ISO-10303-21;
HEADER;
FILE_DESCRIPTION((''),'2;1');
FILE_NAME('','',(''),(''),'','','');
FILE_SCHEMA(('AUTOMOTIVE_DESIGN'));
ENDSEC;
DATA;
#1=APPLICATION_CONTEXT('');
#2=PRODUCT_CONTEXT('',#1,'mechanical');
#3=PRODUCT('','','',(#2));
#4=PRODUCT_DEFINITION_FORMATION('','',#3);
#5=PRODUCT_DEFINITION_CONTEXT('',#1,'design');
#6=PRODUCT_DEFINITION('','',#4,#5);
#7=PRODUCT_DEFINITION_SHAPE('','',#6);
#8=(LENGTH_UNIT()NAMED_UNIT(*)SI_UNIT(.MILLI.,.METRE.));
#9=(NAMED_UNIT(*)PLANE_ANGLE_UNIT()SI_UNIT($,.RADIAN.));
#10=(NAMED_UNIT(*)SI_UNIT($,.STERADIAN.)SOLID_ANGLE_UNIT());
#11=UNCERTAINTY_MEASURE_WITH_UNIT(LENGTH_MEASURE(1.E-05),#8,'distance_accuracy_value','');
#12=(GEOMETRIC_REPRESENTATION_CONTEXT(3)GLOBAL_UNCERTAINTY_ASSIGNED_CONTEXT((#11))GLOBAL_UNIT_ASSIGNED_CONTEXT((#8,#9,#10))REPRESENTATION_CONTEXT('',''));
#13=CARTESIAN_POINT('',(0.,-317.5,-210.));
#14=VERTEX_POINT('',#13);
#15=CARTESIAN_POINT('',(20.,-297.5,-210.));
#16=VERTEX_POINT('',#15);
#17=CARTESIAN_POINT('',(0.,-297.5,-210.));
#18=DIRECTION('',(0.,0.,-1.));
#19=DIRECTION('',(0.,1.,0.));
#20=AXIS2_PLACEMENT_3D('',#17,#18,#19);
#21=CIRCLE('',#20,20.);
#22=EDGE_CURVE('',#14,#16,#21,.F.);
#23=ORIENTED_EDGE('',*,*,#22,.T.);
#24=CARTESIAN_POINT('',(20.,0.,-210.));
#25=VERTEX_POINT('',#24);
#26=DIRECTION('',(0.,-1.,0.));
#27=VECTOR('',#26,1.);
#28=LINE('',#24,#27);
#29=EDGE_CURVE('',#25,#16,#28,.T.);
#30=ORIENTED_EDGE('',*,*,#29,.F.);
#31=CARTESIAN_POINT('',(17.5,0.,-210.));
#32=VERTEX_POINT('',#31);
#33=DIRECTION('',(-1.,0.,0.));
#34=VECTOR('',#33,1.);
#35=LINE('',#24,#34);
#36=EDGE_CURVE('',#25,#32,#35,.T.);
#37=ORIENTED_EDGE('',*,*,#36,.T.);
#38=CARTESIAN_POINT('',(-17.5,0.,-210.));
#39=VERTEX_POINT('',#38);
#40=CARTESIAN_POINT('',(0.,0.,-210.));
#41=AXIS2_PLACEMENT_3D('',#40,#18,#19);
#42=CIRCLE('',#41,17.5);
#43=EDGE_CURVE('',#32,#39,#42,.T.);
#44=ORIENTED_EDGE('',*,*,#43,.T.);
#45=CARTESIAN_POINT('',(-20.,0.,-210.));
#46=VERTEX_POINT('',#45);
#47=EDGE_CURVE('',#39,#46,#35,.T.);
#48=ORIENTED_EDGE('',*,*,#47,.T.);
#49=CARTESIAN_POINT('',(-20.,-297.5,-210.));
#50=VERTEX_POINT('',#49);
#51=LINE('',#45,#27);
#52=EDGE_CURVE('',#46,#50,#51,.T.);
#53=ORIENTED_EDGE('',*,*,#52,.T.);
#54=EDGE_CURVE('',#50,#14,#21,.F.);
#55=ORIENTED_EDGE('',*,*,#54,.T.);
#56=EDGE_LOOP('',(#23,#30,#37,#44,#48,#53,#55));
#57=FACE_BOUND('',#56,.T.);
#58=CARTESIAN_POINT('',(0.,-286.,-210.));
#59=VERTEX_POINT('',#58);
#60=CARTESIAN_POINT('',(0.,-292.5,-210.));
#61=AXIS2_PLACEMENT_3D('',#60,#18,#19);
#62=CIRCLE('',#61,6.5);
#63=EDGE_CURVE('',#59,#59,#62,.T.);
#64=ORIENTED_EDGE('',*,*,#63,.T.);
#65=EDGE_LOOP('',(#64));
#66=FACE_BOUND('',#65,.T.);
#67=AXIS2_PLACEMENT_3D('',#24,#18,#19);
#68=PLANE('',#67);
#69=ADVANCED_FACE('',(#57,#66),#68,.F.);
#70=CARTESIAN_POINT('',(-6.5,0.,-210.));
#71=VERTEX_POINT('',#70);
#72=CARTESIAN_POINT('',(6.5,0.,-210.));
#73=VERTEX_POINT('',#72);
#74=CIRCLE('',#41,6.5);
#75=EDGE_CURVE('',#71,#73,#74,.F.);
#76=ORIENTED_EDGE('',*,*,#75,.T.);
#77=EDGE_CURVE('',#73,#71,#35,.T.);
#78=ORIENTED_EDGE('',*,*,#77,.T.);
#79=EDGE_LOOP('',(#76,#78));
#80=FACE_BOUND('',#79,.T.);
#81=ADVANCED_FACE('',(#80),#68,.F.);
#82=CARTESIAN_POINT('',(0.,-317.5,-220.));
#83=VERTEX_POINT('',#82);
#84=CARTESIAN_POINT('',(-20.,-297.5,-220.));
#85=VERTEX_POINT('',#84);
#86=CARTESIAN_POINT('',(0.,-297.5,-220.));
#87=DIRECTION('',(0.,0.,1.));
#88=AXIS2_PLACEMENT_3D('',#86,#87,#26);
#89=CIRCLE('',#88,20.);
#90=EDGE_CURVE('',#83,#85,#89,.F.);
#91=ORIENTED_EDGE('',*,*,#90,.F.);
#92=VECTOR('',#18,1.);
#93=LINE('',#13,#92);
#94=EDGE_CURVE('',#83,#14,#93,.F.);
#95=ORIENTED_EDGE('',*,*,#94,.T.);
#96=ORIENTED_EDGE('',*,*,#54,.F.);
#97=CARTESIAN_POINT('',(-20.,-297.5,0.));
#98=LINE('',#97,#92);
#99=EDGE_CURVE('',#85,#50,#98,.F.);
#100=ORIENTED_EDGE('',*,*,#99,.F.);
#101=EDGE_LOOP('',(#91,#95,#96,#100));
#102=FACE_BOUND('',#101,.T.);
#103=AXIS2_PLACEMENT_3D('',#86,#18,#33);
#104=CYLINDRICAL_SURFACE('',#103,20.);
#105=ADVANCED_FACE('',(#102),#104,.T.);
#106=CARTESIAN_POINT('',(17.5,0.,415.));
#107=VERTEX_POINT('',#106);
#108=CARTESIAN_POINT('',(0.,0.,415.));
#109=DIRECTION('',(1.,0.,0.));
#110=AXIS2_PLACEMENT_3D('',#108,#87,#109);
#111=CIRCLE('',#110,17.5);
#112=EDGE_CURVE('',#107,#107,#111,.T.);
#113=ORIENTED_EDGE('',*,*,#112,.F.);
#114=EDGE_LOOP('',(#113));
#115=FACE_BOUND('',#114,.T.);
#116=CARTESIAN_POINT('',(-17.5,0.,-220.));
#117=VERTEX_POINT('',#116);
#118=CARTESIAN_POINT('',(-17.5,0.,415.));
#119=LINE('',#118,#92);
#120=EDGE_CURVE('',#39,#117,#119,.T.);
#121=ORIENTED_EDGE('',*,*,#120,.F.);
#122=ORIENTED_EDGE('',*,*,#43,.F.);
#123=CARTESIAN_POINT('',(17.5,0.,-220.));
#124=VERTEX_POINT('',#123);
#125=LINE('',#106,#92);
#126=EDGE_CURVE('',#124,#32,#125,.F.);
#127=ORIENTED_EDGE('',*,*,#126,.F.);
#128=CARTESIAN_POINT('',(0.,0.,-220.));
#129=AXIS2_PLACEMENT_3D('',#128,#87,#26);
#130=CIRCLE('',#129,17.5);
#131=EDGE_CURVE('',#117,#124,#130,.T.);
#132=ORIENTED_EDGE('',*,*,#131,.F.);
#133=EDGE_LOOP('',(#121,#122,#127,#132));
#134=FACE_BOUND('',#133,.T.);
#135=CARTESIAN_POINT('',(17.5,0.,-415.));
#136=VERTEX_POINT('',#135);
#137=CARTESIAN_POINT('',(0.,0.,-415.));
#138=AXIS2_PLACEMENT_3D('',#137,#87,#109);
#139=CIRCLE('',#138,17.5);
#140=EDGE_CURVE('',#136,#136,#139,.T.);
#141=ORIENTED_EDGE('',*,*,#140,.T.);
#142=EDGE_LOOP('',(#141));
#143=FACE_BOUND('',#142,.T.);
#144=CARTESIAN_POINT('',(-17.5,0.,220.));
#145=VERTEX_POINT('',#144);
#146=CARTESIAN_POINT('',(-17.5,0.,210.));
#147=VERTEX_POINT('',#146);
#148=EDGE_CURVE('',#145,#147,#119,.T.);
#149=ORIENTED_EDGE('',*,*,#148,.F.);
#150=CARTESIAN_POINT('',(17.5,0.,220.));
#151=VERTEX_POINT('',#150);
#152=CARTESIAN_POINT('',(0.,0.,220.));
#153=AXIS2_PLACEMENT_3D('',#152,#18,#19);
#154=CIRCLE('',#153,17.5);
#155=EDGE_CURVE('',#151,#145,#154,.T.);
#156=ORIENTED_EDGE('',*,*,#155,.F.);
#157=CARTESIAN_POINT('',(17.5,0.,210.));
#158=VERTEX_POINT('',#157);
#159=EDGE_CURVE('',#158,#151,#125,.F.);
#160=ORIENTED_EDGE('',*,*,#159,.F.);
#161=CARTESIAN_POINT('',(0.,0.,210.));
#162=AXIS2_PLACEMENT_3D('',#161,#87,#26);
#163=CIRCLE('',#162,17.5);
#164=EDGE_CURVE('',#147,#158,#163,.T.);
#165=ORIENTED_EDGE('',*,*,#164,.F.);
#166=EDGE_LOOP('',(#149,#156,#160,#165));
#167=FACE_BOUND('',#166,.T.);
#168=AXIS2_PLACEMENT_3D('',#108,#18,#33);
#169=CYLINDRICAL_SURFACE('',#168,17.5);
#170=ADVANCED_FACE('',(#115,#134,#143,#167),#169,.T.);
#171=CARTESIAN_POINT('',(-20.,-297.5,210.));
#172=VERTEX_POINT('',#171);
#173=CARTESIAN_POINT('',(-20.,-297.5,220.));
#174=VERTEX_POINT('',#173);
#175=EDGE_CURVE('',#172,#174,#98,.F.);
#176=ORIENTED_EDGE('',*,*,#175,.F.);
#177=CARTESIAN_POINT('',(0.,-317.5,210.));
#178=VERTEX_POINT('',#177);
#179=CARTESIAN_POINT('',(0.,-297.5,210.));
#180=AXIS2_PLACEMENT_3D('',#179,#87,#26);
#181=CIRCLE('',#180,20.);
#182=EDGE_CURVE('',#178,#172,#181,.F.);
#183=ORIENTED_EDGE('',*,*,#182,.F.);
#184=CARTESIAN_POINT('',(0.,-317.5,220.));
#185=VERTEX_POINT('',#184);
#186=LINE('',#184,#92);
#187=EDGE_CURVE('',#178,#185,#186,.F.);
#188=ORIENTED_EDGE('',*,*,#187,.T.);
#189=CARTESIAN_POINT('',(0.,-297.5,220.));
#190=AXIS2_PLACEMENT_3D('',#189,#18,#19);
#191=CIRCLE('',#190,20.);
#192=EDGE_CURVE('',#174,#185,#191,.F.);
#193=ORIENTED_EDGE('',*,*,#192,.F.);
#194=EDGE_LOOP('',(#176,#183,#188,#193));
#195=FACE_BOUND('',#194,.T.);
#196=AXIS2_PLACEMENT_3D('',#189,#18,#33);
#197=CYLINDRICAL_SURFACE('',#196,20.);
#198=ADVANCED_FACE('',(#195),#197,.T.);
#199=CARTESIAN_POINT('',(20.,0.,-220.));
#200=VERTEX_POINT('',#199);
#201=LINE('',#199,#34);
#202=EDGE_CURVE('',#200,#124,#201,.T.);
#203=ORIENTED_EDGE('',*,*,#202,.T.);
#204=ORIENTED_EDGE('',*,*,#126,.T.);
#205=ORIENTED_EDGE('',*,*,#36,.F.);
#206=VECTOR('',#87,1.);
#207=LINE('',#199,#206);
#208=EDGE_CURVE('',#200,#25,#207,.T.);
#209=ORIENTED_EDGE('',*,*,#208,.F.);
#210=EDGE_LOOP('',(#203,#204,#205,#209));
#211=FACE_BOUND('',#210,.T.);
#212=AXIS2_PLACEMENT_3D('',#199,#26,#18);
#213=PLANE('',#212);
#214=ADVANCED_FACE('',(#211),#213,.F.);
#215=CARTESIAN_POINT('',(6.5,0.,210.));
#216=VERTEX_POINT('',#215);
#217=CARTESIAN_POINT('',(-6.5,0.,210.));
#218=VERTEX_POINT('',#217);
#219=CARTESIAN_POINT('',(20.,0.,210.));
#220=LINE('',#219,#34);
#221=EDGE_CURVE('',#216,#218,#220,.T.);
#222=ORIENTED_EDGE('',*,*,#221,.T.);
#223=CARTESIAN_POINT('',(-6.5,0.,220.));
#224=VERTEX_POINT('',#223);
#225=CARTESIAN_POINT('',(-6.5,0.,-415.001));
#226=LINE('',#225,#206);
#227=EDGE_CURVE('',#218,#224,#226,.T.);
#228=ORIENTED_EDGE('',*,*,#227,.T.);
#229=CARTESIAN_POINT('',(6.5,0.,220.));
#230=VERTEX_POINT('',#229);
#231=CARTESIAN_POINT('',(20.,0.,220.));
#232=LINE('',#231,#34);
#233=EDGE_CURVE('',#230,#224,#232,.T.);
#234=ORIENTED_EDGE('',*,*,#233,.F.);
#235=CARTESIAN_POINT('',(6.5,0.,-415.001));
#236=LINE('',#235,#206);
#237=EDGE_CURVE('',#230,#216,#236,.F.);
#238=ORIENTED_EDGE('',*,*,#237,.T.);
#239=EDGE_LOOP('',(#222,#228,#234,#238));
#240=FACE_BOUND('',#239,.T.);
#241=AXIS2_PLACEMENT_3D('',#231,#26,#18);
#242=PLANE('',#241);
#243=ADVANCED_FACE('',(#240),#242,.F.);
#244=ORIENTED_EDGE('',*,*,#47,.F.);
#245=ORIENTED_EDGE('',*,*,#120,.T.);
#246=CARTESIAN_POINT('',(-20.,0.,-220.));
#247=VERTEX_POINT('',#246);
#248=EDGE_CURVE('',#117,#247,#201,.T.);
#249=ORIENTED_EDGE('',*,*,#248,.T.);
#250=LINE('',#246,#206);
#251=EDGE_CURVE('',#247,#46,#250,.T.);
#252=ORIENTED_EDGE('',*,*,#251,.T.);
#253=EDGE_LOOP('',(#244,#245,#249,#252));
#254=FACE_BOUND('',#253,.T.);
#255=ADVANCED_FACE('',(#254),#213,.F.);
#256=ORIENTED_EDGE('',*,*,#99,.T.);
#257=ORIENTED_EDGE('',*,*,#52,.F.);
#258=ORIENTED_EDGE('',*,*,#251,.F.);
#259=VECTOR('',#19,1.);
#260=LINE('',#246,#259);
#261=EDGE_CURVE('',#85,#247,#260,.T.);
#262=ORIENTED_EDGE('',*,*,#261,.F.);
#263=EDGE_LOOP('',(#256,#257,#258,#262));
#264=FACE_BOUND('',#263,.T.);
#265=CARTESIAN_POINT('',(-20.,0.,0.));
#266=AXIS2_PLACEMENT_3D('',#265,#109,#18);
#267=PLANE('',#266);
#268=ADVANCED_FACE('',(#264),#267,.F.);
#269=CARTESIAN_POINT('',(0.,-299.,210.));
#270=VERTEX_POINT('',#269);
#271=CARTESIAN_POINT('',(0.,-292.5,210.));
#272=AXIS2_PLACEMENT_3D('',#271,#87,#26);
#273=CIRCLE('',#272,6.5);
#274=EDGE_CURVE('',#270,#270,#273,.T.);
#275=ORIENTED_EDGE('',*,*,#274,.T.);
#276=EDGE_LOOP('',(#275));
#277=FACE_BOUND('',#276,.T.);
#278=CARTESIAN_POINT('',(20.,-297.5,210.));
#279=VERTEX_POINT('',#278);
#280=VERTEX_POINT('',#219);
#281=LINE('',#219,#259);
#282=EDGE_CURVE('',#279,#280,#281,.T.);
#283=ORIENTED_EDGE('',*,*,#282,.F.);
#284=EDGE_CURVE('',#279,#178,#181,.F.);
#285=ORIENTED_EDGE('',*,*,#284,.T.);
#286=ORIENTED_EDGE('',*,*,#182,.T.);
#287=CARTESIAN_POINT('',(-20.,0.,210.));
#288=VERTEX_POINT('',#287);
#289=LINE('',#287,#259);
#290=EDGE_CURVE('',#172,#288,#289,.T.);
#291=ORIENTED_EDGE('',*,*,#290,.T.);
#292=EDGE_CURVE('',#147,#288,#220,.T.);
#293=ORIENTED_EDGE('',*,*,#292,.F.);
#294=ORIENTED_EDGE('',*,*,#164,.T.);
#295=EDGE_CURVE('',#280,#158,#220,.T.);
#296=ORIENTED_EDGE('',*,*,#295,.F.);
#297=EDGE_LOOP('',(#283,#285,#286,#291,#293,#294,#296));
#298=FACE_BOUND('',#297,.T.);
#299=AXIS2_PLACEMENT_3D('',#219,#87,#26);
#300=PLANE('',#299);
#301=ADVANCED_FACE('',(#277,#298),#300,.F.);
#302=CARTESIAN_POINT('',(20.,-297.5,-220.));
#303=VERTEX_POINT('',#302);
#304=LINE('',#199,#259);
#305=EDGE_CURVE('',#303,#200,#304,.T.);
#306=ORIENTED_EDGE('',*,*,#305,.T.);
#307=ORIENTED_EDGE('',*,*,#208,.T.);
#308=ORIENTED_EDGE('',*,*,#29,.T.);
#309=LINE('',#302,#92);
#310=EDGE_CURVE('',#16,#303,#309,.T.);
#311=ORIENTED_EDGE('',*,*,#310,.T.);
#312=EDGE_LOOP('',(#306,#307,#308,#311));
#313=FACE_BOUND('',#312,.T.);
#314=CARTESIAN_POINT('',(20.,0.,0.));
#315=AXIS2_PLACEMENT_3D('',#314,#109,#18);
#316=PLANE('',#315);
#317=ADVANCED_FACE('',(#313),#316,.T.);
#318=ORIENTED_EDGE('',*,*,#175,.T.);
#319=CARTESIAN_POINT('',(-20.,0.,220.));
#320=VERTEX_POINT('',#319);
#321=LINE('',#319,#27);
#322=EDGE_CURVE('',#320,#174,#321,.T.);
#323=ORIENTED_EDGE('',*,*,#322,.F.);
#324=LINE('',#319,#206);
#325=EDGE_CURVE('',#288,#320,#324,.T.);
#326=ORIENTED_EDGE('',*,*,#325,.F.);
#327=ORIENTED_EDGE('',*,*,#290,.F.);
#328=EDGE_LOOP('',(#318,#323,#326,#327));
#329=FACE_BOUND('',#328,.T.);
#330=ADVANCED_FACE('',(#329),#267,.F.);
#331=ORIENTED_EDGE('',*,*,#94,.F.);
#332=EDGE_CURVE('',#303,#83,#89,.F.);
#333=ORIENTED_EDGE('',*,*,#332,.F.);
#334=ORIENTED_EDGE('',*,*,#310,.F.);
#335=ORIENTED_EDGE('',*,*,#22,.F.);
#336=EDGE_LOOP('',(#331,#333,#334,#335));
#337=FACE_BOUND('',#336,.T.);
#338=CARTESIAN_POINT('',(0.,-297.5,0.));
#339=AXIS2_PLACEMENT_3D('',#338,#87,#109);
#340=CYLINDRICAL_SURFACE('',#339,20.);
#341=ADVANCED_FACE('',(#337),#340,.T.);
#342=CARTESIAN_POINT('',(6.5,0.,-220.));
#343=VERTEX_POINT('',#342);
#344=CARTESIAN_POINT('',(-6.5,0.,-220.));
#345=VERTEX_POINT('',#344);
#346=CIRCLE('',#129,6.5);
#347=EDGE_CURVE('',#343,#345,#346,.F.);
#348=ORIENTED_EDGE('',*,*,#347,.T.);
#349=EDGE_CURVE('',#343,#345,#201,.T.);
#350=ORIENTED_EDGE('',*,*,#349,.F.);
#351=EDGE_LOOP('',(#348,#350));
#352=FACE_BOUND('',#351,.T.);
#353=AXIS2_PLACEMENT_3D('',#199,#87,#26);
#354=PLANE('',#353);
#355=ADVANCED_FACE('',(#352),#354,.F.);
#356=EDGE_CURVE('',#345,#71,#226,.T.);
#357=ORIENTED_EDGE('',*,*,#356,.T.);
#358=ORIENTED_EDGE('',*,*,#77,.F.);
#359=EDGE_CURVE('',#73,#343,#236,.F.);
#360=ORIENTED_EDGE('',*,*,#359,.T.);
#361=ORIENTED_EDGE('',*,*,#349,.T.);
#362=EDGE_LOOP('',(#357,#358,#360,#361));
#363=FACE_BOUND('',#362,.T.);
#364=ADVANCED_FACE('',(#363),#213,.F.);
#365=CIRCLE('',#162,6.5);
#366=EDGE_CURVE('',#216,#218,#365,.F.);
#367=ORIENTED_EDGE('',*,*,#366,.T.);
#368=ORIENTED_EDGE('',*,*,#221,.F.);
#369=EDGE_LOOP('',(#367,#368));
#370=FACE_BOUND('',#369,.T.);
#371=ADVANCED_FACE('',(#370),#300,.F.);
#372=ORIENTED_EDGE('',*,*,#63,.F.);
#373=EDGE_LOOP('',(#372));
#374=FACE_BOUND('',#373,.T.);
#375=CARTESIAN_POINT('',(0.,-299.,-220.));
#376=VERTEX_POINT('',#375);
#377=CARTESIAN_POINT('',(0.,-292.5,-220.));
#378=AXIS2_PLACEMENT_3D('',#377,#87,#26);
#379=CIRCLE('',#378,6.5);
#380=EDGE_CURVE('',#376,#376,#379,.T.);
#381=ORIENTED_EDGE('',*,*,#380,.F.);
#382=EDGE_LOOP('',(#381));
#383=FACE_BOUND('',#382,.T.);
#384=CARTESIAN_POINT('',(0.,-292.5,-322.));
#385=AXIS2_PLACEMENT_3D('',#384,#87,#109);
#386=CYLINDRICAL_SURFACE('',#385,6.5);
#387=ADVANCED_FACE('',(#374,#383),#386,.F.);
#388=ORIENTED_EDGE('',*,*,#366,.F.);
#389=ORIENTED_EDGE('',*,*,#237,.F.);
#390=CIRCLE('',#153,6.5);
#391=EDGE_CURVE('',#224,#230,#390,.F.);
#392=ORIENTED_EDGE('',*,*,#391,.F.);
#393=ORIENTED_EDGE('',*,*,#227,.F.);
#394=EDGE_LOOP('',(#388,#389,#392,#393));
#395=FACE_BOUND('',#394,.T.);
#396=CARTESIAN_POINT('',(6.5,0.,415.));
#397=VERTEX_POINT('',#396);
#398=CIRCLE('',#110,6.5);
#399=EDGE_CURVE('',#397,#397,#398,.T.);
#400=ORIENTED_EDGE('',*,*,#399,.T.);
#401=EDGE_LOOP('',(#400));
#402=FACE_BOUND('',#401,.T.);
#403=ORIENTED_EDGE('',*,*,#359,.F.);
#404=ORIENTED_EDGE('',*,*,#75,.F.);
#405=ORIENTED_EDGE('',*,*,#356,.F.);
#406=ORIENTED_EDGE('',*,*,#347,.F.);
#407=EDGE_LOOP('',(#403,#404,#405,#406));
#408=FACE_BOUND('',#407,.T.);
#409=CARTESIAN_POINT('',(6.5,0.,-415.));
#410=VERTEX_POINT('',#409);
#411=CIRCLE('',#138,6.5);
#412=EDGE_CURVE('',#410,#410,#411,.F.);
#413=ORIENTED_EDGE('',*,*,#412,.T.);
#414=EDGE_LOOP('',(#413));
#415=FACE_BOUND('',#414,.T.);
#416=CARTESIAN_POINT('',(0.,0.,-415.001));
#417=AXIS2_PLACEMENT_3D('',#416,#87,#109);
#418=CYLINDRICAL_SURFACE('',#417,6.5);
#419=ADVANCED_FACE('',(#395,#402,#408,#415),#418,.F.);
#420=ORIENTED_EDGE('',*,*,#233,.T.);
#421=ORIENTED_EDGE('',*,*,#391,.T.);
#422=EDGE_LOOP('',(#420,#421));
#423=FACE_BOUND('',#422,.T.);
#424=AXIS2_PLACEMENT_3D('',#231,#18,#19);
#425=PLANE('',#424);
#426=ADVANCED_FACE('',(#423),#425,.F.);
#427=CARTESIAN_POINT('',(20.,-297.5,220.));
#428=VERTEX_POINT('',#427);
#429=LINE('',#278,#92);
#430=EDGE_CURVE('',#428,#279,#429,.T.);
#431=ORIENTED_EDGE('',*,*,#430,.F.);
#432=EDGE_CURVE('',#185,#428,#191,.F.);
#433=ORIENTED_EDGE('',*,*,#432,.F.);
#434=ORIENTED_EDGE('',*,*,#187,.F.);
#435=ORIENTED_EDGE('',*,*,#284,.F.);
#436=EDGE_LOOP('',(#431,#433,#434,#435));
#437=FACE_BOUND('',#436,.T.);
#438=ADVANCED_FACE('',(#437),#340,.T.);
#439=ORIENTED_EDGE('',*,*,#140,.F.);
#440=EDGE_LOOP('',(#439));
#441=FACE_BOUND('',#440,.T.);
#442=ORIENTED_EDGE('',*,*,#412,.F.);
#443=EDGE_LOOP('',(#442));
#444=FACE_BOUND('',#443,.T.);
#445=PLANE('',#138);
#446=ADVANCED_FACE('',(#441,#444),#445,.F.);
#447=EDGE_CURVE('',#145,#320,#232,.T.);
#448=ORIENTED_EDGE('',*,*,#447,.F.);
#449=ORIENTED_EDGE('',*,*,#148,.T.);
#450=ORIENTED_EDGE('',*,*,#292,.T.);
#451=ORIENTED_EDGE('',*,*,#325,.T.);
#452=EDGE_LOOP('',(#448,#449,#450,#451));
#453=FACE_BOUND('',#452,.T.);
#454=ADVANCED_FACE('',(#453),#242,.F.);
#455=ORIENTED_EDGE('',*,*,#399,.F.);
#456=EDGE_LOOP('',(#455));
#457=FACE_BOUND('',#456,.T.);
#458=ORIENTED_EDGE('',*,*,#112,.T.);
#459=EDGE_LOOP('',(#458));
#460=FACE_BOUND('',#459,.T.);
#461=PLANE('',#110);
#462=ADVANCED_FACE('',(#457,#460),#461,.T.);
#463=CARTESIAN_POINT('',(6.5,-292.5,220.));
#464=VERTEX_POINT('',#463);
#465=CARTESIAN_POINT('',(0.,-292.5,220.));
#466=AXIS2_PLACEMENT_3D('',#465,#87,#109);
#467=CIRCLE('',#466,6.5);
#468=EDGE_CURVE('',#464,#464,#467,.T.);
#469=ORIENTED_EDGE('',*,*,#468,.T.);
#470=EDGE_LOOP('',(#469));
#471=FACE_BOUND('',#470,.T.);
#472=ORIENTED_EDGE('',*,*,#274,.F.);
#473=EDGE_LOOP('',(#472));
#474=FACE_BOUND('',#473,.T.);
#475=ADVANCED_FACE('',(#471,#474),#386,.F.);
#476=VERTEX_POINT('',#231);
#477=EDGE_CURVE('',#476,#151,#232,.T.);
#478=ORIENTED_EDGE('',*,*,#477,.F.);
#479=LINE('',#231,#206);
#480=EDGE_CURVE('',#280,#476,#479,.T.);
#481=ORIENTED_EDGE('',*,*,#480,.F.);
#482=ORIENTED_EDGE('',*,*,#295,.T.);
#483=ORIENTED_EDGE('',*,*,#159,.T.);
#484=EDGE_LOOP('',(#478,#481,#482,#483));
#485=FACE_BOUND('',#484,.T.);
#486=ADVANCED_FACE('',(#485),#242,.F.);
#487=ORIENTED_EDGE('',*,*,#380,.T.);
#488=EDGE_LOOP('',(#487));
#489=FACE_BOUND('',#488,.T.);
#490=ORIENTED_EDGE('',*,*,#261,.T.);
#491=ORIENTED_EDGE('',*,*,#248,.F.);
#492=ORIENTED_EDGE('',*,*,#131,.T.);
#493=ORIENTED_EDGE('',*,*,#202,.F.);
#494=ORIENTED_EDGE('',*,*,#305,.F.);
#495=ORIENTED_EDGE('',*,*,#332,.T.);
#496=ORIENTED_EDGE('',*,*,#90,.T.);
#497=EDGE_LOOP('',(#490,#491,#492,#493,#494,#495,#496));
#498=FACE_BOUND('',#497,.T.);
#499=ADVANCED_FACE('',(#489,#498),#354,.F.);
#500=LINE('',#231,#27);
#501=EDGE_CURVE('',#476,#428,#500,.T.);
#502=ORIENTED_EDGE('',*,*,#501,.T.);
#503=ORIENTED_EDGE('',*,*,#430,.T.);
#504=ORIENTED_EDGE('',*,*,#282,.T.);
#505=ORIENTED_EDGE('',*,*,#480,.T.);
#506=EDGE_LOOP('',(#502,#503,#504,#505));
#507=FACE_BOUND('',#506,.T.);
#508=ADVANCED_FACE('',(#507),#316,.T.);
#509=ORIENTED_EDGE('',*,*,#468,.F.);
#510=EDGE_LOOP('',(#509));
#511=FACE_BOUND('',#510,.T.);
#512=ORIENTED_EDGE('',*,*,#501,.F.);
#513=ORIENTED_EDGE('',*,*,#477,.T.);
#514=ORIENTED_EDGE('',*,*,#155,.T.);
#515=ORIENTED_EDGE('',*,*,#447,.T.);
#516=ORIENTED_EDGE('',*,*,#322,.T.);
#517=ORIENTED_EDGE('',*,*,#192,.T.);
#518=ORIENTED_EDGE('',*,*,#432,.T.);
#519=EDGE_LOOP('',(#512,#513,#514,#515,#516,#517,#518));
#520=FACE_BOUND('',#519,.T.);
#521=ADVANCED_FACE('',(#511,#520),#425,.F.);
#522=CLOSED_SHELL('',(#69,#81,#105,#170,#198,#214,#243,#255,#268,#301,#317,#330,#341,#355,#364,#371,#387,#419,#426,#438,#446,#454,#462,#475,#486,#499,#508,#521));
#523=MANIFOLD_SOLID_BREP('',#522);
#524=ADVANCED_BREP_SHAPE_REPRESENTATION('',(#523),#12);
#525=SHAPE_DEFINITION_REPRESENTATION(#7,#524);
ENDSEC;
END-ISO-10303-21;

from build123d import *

# Parameters (mm, degrees)
SKETCH1_R           = 17.5
BOSS_EXTRUDE1_DEPTH = 415
CUT_EXTRUDE1_REACH  = 832.369
SKETCH2_R           = 6.5
SKETCH3_W           = 10
SKETCH3_H           = 317.5
BOSS_EXTRUDE2_DEPTH = 20
FILLET1_R           = 20
SKETCH4_R           = 6.5
CUT_EXTRUDE2_DEPTH  = 542


with BuildPart() as part:
    # Sketch1 → Boss-Extrude1 (new, symmetric)
    with BuildSketch(Plane.XY):
        Circle(SKETCH1_R)
    extrude(amount=BOSS_EXTRUDE1_DEPTH, both=True)

    # Sketch2 → Cut-Extrude1 (cut, up to next)
    with BuildSketch(Plane.XY.offset(415), mode=Mode.PRIVATE) as cut_extrude1_sk1:
        Circle(SKETCH2_R)
    cut_extrude1_tool1 = extrude(cut_extrude1_sk1.sketch, amount=-CUT_EXTRUDE1_REACH, mode=Mode.PRIVATE) & part.part
    add(cut_extrude1_tool1.solids().sort_by_distance((0, 0, 415))[0], mode=Mode.SUBTRACT)

    # Sketch3 → Boss-Extrude2 (add, symmetric)
    with BuildSketch(Plane(origin=(0, 0, 0), x_dir=(0, 0, -1), z_dir=(1, 0, 0))):
        with Locations((-215, -158.75)):
            Rectangle(SKETCH3_W, SKETCH3_H)
        with Locations((215, -158.75)):
            Rectangle(SKETCH3_W, SKETCH3_H)
    extrude(amount=BOSS_EXTRUDE2_DEPTH, both=True)

    # Fillet1
    fillet1_edges = [part.edges().sort_by_distance(p)[0] for p in [
        (-20, -317.5, -215),
        (20, -317.5, -215),
        (-20, -317.5, 215),
        (20, -317.5, 215),
    ]]
    fillet(fillet1_edges, radius=FILLET1_R - 0.0001)  # a hair under: the kernel refuses the full size

    # Sketch4 → Cut-Extrude2 (cut)
    with BuildSketch(Plane.XY.offset(220)):
        with Locations(Location((0, -292.5, 0), (0, 0, 270))):
            Circle(SKETCH4_R)
    extrude(amount=-CUT_EXTRUDE2_DEPTH, mode=Mode.SUBTRACT)


solid = part.part
